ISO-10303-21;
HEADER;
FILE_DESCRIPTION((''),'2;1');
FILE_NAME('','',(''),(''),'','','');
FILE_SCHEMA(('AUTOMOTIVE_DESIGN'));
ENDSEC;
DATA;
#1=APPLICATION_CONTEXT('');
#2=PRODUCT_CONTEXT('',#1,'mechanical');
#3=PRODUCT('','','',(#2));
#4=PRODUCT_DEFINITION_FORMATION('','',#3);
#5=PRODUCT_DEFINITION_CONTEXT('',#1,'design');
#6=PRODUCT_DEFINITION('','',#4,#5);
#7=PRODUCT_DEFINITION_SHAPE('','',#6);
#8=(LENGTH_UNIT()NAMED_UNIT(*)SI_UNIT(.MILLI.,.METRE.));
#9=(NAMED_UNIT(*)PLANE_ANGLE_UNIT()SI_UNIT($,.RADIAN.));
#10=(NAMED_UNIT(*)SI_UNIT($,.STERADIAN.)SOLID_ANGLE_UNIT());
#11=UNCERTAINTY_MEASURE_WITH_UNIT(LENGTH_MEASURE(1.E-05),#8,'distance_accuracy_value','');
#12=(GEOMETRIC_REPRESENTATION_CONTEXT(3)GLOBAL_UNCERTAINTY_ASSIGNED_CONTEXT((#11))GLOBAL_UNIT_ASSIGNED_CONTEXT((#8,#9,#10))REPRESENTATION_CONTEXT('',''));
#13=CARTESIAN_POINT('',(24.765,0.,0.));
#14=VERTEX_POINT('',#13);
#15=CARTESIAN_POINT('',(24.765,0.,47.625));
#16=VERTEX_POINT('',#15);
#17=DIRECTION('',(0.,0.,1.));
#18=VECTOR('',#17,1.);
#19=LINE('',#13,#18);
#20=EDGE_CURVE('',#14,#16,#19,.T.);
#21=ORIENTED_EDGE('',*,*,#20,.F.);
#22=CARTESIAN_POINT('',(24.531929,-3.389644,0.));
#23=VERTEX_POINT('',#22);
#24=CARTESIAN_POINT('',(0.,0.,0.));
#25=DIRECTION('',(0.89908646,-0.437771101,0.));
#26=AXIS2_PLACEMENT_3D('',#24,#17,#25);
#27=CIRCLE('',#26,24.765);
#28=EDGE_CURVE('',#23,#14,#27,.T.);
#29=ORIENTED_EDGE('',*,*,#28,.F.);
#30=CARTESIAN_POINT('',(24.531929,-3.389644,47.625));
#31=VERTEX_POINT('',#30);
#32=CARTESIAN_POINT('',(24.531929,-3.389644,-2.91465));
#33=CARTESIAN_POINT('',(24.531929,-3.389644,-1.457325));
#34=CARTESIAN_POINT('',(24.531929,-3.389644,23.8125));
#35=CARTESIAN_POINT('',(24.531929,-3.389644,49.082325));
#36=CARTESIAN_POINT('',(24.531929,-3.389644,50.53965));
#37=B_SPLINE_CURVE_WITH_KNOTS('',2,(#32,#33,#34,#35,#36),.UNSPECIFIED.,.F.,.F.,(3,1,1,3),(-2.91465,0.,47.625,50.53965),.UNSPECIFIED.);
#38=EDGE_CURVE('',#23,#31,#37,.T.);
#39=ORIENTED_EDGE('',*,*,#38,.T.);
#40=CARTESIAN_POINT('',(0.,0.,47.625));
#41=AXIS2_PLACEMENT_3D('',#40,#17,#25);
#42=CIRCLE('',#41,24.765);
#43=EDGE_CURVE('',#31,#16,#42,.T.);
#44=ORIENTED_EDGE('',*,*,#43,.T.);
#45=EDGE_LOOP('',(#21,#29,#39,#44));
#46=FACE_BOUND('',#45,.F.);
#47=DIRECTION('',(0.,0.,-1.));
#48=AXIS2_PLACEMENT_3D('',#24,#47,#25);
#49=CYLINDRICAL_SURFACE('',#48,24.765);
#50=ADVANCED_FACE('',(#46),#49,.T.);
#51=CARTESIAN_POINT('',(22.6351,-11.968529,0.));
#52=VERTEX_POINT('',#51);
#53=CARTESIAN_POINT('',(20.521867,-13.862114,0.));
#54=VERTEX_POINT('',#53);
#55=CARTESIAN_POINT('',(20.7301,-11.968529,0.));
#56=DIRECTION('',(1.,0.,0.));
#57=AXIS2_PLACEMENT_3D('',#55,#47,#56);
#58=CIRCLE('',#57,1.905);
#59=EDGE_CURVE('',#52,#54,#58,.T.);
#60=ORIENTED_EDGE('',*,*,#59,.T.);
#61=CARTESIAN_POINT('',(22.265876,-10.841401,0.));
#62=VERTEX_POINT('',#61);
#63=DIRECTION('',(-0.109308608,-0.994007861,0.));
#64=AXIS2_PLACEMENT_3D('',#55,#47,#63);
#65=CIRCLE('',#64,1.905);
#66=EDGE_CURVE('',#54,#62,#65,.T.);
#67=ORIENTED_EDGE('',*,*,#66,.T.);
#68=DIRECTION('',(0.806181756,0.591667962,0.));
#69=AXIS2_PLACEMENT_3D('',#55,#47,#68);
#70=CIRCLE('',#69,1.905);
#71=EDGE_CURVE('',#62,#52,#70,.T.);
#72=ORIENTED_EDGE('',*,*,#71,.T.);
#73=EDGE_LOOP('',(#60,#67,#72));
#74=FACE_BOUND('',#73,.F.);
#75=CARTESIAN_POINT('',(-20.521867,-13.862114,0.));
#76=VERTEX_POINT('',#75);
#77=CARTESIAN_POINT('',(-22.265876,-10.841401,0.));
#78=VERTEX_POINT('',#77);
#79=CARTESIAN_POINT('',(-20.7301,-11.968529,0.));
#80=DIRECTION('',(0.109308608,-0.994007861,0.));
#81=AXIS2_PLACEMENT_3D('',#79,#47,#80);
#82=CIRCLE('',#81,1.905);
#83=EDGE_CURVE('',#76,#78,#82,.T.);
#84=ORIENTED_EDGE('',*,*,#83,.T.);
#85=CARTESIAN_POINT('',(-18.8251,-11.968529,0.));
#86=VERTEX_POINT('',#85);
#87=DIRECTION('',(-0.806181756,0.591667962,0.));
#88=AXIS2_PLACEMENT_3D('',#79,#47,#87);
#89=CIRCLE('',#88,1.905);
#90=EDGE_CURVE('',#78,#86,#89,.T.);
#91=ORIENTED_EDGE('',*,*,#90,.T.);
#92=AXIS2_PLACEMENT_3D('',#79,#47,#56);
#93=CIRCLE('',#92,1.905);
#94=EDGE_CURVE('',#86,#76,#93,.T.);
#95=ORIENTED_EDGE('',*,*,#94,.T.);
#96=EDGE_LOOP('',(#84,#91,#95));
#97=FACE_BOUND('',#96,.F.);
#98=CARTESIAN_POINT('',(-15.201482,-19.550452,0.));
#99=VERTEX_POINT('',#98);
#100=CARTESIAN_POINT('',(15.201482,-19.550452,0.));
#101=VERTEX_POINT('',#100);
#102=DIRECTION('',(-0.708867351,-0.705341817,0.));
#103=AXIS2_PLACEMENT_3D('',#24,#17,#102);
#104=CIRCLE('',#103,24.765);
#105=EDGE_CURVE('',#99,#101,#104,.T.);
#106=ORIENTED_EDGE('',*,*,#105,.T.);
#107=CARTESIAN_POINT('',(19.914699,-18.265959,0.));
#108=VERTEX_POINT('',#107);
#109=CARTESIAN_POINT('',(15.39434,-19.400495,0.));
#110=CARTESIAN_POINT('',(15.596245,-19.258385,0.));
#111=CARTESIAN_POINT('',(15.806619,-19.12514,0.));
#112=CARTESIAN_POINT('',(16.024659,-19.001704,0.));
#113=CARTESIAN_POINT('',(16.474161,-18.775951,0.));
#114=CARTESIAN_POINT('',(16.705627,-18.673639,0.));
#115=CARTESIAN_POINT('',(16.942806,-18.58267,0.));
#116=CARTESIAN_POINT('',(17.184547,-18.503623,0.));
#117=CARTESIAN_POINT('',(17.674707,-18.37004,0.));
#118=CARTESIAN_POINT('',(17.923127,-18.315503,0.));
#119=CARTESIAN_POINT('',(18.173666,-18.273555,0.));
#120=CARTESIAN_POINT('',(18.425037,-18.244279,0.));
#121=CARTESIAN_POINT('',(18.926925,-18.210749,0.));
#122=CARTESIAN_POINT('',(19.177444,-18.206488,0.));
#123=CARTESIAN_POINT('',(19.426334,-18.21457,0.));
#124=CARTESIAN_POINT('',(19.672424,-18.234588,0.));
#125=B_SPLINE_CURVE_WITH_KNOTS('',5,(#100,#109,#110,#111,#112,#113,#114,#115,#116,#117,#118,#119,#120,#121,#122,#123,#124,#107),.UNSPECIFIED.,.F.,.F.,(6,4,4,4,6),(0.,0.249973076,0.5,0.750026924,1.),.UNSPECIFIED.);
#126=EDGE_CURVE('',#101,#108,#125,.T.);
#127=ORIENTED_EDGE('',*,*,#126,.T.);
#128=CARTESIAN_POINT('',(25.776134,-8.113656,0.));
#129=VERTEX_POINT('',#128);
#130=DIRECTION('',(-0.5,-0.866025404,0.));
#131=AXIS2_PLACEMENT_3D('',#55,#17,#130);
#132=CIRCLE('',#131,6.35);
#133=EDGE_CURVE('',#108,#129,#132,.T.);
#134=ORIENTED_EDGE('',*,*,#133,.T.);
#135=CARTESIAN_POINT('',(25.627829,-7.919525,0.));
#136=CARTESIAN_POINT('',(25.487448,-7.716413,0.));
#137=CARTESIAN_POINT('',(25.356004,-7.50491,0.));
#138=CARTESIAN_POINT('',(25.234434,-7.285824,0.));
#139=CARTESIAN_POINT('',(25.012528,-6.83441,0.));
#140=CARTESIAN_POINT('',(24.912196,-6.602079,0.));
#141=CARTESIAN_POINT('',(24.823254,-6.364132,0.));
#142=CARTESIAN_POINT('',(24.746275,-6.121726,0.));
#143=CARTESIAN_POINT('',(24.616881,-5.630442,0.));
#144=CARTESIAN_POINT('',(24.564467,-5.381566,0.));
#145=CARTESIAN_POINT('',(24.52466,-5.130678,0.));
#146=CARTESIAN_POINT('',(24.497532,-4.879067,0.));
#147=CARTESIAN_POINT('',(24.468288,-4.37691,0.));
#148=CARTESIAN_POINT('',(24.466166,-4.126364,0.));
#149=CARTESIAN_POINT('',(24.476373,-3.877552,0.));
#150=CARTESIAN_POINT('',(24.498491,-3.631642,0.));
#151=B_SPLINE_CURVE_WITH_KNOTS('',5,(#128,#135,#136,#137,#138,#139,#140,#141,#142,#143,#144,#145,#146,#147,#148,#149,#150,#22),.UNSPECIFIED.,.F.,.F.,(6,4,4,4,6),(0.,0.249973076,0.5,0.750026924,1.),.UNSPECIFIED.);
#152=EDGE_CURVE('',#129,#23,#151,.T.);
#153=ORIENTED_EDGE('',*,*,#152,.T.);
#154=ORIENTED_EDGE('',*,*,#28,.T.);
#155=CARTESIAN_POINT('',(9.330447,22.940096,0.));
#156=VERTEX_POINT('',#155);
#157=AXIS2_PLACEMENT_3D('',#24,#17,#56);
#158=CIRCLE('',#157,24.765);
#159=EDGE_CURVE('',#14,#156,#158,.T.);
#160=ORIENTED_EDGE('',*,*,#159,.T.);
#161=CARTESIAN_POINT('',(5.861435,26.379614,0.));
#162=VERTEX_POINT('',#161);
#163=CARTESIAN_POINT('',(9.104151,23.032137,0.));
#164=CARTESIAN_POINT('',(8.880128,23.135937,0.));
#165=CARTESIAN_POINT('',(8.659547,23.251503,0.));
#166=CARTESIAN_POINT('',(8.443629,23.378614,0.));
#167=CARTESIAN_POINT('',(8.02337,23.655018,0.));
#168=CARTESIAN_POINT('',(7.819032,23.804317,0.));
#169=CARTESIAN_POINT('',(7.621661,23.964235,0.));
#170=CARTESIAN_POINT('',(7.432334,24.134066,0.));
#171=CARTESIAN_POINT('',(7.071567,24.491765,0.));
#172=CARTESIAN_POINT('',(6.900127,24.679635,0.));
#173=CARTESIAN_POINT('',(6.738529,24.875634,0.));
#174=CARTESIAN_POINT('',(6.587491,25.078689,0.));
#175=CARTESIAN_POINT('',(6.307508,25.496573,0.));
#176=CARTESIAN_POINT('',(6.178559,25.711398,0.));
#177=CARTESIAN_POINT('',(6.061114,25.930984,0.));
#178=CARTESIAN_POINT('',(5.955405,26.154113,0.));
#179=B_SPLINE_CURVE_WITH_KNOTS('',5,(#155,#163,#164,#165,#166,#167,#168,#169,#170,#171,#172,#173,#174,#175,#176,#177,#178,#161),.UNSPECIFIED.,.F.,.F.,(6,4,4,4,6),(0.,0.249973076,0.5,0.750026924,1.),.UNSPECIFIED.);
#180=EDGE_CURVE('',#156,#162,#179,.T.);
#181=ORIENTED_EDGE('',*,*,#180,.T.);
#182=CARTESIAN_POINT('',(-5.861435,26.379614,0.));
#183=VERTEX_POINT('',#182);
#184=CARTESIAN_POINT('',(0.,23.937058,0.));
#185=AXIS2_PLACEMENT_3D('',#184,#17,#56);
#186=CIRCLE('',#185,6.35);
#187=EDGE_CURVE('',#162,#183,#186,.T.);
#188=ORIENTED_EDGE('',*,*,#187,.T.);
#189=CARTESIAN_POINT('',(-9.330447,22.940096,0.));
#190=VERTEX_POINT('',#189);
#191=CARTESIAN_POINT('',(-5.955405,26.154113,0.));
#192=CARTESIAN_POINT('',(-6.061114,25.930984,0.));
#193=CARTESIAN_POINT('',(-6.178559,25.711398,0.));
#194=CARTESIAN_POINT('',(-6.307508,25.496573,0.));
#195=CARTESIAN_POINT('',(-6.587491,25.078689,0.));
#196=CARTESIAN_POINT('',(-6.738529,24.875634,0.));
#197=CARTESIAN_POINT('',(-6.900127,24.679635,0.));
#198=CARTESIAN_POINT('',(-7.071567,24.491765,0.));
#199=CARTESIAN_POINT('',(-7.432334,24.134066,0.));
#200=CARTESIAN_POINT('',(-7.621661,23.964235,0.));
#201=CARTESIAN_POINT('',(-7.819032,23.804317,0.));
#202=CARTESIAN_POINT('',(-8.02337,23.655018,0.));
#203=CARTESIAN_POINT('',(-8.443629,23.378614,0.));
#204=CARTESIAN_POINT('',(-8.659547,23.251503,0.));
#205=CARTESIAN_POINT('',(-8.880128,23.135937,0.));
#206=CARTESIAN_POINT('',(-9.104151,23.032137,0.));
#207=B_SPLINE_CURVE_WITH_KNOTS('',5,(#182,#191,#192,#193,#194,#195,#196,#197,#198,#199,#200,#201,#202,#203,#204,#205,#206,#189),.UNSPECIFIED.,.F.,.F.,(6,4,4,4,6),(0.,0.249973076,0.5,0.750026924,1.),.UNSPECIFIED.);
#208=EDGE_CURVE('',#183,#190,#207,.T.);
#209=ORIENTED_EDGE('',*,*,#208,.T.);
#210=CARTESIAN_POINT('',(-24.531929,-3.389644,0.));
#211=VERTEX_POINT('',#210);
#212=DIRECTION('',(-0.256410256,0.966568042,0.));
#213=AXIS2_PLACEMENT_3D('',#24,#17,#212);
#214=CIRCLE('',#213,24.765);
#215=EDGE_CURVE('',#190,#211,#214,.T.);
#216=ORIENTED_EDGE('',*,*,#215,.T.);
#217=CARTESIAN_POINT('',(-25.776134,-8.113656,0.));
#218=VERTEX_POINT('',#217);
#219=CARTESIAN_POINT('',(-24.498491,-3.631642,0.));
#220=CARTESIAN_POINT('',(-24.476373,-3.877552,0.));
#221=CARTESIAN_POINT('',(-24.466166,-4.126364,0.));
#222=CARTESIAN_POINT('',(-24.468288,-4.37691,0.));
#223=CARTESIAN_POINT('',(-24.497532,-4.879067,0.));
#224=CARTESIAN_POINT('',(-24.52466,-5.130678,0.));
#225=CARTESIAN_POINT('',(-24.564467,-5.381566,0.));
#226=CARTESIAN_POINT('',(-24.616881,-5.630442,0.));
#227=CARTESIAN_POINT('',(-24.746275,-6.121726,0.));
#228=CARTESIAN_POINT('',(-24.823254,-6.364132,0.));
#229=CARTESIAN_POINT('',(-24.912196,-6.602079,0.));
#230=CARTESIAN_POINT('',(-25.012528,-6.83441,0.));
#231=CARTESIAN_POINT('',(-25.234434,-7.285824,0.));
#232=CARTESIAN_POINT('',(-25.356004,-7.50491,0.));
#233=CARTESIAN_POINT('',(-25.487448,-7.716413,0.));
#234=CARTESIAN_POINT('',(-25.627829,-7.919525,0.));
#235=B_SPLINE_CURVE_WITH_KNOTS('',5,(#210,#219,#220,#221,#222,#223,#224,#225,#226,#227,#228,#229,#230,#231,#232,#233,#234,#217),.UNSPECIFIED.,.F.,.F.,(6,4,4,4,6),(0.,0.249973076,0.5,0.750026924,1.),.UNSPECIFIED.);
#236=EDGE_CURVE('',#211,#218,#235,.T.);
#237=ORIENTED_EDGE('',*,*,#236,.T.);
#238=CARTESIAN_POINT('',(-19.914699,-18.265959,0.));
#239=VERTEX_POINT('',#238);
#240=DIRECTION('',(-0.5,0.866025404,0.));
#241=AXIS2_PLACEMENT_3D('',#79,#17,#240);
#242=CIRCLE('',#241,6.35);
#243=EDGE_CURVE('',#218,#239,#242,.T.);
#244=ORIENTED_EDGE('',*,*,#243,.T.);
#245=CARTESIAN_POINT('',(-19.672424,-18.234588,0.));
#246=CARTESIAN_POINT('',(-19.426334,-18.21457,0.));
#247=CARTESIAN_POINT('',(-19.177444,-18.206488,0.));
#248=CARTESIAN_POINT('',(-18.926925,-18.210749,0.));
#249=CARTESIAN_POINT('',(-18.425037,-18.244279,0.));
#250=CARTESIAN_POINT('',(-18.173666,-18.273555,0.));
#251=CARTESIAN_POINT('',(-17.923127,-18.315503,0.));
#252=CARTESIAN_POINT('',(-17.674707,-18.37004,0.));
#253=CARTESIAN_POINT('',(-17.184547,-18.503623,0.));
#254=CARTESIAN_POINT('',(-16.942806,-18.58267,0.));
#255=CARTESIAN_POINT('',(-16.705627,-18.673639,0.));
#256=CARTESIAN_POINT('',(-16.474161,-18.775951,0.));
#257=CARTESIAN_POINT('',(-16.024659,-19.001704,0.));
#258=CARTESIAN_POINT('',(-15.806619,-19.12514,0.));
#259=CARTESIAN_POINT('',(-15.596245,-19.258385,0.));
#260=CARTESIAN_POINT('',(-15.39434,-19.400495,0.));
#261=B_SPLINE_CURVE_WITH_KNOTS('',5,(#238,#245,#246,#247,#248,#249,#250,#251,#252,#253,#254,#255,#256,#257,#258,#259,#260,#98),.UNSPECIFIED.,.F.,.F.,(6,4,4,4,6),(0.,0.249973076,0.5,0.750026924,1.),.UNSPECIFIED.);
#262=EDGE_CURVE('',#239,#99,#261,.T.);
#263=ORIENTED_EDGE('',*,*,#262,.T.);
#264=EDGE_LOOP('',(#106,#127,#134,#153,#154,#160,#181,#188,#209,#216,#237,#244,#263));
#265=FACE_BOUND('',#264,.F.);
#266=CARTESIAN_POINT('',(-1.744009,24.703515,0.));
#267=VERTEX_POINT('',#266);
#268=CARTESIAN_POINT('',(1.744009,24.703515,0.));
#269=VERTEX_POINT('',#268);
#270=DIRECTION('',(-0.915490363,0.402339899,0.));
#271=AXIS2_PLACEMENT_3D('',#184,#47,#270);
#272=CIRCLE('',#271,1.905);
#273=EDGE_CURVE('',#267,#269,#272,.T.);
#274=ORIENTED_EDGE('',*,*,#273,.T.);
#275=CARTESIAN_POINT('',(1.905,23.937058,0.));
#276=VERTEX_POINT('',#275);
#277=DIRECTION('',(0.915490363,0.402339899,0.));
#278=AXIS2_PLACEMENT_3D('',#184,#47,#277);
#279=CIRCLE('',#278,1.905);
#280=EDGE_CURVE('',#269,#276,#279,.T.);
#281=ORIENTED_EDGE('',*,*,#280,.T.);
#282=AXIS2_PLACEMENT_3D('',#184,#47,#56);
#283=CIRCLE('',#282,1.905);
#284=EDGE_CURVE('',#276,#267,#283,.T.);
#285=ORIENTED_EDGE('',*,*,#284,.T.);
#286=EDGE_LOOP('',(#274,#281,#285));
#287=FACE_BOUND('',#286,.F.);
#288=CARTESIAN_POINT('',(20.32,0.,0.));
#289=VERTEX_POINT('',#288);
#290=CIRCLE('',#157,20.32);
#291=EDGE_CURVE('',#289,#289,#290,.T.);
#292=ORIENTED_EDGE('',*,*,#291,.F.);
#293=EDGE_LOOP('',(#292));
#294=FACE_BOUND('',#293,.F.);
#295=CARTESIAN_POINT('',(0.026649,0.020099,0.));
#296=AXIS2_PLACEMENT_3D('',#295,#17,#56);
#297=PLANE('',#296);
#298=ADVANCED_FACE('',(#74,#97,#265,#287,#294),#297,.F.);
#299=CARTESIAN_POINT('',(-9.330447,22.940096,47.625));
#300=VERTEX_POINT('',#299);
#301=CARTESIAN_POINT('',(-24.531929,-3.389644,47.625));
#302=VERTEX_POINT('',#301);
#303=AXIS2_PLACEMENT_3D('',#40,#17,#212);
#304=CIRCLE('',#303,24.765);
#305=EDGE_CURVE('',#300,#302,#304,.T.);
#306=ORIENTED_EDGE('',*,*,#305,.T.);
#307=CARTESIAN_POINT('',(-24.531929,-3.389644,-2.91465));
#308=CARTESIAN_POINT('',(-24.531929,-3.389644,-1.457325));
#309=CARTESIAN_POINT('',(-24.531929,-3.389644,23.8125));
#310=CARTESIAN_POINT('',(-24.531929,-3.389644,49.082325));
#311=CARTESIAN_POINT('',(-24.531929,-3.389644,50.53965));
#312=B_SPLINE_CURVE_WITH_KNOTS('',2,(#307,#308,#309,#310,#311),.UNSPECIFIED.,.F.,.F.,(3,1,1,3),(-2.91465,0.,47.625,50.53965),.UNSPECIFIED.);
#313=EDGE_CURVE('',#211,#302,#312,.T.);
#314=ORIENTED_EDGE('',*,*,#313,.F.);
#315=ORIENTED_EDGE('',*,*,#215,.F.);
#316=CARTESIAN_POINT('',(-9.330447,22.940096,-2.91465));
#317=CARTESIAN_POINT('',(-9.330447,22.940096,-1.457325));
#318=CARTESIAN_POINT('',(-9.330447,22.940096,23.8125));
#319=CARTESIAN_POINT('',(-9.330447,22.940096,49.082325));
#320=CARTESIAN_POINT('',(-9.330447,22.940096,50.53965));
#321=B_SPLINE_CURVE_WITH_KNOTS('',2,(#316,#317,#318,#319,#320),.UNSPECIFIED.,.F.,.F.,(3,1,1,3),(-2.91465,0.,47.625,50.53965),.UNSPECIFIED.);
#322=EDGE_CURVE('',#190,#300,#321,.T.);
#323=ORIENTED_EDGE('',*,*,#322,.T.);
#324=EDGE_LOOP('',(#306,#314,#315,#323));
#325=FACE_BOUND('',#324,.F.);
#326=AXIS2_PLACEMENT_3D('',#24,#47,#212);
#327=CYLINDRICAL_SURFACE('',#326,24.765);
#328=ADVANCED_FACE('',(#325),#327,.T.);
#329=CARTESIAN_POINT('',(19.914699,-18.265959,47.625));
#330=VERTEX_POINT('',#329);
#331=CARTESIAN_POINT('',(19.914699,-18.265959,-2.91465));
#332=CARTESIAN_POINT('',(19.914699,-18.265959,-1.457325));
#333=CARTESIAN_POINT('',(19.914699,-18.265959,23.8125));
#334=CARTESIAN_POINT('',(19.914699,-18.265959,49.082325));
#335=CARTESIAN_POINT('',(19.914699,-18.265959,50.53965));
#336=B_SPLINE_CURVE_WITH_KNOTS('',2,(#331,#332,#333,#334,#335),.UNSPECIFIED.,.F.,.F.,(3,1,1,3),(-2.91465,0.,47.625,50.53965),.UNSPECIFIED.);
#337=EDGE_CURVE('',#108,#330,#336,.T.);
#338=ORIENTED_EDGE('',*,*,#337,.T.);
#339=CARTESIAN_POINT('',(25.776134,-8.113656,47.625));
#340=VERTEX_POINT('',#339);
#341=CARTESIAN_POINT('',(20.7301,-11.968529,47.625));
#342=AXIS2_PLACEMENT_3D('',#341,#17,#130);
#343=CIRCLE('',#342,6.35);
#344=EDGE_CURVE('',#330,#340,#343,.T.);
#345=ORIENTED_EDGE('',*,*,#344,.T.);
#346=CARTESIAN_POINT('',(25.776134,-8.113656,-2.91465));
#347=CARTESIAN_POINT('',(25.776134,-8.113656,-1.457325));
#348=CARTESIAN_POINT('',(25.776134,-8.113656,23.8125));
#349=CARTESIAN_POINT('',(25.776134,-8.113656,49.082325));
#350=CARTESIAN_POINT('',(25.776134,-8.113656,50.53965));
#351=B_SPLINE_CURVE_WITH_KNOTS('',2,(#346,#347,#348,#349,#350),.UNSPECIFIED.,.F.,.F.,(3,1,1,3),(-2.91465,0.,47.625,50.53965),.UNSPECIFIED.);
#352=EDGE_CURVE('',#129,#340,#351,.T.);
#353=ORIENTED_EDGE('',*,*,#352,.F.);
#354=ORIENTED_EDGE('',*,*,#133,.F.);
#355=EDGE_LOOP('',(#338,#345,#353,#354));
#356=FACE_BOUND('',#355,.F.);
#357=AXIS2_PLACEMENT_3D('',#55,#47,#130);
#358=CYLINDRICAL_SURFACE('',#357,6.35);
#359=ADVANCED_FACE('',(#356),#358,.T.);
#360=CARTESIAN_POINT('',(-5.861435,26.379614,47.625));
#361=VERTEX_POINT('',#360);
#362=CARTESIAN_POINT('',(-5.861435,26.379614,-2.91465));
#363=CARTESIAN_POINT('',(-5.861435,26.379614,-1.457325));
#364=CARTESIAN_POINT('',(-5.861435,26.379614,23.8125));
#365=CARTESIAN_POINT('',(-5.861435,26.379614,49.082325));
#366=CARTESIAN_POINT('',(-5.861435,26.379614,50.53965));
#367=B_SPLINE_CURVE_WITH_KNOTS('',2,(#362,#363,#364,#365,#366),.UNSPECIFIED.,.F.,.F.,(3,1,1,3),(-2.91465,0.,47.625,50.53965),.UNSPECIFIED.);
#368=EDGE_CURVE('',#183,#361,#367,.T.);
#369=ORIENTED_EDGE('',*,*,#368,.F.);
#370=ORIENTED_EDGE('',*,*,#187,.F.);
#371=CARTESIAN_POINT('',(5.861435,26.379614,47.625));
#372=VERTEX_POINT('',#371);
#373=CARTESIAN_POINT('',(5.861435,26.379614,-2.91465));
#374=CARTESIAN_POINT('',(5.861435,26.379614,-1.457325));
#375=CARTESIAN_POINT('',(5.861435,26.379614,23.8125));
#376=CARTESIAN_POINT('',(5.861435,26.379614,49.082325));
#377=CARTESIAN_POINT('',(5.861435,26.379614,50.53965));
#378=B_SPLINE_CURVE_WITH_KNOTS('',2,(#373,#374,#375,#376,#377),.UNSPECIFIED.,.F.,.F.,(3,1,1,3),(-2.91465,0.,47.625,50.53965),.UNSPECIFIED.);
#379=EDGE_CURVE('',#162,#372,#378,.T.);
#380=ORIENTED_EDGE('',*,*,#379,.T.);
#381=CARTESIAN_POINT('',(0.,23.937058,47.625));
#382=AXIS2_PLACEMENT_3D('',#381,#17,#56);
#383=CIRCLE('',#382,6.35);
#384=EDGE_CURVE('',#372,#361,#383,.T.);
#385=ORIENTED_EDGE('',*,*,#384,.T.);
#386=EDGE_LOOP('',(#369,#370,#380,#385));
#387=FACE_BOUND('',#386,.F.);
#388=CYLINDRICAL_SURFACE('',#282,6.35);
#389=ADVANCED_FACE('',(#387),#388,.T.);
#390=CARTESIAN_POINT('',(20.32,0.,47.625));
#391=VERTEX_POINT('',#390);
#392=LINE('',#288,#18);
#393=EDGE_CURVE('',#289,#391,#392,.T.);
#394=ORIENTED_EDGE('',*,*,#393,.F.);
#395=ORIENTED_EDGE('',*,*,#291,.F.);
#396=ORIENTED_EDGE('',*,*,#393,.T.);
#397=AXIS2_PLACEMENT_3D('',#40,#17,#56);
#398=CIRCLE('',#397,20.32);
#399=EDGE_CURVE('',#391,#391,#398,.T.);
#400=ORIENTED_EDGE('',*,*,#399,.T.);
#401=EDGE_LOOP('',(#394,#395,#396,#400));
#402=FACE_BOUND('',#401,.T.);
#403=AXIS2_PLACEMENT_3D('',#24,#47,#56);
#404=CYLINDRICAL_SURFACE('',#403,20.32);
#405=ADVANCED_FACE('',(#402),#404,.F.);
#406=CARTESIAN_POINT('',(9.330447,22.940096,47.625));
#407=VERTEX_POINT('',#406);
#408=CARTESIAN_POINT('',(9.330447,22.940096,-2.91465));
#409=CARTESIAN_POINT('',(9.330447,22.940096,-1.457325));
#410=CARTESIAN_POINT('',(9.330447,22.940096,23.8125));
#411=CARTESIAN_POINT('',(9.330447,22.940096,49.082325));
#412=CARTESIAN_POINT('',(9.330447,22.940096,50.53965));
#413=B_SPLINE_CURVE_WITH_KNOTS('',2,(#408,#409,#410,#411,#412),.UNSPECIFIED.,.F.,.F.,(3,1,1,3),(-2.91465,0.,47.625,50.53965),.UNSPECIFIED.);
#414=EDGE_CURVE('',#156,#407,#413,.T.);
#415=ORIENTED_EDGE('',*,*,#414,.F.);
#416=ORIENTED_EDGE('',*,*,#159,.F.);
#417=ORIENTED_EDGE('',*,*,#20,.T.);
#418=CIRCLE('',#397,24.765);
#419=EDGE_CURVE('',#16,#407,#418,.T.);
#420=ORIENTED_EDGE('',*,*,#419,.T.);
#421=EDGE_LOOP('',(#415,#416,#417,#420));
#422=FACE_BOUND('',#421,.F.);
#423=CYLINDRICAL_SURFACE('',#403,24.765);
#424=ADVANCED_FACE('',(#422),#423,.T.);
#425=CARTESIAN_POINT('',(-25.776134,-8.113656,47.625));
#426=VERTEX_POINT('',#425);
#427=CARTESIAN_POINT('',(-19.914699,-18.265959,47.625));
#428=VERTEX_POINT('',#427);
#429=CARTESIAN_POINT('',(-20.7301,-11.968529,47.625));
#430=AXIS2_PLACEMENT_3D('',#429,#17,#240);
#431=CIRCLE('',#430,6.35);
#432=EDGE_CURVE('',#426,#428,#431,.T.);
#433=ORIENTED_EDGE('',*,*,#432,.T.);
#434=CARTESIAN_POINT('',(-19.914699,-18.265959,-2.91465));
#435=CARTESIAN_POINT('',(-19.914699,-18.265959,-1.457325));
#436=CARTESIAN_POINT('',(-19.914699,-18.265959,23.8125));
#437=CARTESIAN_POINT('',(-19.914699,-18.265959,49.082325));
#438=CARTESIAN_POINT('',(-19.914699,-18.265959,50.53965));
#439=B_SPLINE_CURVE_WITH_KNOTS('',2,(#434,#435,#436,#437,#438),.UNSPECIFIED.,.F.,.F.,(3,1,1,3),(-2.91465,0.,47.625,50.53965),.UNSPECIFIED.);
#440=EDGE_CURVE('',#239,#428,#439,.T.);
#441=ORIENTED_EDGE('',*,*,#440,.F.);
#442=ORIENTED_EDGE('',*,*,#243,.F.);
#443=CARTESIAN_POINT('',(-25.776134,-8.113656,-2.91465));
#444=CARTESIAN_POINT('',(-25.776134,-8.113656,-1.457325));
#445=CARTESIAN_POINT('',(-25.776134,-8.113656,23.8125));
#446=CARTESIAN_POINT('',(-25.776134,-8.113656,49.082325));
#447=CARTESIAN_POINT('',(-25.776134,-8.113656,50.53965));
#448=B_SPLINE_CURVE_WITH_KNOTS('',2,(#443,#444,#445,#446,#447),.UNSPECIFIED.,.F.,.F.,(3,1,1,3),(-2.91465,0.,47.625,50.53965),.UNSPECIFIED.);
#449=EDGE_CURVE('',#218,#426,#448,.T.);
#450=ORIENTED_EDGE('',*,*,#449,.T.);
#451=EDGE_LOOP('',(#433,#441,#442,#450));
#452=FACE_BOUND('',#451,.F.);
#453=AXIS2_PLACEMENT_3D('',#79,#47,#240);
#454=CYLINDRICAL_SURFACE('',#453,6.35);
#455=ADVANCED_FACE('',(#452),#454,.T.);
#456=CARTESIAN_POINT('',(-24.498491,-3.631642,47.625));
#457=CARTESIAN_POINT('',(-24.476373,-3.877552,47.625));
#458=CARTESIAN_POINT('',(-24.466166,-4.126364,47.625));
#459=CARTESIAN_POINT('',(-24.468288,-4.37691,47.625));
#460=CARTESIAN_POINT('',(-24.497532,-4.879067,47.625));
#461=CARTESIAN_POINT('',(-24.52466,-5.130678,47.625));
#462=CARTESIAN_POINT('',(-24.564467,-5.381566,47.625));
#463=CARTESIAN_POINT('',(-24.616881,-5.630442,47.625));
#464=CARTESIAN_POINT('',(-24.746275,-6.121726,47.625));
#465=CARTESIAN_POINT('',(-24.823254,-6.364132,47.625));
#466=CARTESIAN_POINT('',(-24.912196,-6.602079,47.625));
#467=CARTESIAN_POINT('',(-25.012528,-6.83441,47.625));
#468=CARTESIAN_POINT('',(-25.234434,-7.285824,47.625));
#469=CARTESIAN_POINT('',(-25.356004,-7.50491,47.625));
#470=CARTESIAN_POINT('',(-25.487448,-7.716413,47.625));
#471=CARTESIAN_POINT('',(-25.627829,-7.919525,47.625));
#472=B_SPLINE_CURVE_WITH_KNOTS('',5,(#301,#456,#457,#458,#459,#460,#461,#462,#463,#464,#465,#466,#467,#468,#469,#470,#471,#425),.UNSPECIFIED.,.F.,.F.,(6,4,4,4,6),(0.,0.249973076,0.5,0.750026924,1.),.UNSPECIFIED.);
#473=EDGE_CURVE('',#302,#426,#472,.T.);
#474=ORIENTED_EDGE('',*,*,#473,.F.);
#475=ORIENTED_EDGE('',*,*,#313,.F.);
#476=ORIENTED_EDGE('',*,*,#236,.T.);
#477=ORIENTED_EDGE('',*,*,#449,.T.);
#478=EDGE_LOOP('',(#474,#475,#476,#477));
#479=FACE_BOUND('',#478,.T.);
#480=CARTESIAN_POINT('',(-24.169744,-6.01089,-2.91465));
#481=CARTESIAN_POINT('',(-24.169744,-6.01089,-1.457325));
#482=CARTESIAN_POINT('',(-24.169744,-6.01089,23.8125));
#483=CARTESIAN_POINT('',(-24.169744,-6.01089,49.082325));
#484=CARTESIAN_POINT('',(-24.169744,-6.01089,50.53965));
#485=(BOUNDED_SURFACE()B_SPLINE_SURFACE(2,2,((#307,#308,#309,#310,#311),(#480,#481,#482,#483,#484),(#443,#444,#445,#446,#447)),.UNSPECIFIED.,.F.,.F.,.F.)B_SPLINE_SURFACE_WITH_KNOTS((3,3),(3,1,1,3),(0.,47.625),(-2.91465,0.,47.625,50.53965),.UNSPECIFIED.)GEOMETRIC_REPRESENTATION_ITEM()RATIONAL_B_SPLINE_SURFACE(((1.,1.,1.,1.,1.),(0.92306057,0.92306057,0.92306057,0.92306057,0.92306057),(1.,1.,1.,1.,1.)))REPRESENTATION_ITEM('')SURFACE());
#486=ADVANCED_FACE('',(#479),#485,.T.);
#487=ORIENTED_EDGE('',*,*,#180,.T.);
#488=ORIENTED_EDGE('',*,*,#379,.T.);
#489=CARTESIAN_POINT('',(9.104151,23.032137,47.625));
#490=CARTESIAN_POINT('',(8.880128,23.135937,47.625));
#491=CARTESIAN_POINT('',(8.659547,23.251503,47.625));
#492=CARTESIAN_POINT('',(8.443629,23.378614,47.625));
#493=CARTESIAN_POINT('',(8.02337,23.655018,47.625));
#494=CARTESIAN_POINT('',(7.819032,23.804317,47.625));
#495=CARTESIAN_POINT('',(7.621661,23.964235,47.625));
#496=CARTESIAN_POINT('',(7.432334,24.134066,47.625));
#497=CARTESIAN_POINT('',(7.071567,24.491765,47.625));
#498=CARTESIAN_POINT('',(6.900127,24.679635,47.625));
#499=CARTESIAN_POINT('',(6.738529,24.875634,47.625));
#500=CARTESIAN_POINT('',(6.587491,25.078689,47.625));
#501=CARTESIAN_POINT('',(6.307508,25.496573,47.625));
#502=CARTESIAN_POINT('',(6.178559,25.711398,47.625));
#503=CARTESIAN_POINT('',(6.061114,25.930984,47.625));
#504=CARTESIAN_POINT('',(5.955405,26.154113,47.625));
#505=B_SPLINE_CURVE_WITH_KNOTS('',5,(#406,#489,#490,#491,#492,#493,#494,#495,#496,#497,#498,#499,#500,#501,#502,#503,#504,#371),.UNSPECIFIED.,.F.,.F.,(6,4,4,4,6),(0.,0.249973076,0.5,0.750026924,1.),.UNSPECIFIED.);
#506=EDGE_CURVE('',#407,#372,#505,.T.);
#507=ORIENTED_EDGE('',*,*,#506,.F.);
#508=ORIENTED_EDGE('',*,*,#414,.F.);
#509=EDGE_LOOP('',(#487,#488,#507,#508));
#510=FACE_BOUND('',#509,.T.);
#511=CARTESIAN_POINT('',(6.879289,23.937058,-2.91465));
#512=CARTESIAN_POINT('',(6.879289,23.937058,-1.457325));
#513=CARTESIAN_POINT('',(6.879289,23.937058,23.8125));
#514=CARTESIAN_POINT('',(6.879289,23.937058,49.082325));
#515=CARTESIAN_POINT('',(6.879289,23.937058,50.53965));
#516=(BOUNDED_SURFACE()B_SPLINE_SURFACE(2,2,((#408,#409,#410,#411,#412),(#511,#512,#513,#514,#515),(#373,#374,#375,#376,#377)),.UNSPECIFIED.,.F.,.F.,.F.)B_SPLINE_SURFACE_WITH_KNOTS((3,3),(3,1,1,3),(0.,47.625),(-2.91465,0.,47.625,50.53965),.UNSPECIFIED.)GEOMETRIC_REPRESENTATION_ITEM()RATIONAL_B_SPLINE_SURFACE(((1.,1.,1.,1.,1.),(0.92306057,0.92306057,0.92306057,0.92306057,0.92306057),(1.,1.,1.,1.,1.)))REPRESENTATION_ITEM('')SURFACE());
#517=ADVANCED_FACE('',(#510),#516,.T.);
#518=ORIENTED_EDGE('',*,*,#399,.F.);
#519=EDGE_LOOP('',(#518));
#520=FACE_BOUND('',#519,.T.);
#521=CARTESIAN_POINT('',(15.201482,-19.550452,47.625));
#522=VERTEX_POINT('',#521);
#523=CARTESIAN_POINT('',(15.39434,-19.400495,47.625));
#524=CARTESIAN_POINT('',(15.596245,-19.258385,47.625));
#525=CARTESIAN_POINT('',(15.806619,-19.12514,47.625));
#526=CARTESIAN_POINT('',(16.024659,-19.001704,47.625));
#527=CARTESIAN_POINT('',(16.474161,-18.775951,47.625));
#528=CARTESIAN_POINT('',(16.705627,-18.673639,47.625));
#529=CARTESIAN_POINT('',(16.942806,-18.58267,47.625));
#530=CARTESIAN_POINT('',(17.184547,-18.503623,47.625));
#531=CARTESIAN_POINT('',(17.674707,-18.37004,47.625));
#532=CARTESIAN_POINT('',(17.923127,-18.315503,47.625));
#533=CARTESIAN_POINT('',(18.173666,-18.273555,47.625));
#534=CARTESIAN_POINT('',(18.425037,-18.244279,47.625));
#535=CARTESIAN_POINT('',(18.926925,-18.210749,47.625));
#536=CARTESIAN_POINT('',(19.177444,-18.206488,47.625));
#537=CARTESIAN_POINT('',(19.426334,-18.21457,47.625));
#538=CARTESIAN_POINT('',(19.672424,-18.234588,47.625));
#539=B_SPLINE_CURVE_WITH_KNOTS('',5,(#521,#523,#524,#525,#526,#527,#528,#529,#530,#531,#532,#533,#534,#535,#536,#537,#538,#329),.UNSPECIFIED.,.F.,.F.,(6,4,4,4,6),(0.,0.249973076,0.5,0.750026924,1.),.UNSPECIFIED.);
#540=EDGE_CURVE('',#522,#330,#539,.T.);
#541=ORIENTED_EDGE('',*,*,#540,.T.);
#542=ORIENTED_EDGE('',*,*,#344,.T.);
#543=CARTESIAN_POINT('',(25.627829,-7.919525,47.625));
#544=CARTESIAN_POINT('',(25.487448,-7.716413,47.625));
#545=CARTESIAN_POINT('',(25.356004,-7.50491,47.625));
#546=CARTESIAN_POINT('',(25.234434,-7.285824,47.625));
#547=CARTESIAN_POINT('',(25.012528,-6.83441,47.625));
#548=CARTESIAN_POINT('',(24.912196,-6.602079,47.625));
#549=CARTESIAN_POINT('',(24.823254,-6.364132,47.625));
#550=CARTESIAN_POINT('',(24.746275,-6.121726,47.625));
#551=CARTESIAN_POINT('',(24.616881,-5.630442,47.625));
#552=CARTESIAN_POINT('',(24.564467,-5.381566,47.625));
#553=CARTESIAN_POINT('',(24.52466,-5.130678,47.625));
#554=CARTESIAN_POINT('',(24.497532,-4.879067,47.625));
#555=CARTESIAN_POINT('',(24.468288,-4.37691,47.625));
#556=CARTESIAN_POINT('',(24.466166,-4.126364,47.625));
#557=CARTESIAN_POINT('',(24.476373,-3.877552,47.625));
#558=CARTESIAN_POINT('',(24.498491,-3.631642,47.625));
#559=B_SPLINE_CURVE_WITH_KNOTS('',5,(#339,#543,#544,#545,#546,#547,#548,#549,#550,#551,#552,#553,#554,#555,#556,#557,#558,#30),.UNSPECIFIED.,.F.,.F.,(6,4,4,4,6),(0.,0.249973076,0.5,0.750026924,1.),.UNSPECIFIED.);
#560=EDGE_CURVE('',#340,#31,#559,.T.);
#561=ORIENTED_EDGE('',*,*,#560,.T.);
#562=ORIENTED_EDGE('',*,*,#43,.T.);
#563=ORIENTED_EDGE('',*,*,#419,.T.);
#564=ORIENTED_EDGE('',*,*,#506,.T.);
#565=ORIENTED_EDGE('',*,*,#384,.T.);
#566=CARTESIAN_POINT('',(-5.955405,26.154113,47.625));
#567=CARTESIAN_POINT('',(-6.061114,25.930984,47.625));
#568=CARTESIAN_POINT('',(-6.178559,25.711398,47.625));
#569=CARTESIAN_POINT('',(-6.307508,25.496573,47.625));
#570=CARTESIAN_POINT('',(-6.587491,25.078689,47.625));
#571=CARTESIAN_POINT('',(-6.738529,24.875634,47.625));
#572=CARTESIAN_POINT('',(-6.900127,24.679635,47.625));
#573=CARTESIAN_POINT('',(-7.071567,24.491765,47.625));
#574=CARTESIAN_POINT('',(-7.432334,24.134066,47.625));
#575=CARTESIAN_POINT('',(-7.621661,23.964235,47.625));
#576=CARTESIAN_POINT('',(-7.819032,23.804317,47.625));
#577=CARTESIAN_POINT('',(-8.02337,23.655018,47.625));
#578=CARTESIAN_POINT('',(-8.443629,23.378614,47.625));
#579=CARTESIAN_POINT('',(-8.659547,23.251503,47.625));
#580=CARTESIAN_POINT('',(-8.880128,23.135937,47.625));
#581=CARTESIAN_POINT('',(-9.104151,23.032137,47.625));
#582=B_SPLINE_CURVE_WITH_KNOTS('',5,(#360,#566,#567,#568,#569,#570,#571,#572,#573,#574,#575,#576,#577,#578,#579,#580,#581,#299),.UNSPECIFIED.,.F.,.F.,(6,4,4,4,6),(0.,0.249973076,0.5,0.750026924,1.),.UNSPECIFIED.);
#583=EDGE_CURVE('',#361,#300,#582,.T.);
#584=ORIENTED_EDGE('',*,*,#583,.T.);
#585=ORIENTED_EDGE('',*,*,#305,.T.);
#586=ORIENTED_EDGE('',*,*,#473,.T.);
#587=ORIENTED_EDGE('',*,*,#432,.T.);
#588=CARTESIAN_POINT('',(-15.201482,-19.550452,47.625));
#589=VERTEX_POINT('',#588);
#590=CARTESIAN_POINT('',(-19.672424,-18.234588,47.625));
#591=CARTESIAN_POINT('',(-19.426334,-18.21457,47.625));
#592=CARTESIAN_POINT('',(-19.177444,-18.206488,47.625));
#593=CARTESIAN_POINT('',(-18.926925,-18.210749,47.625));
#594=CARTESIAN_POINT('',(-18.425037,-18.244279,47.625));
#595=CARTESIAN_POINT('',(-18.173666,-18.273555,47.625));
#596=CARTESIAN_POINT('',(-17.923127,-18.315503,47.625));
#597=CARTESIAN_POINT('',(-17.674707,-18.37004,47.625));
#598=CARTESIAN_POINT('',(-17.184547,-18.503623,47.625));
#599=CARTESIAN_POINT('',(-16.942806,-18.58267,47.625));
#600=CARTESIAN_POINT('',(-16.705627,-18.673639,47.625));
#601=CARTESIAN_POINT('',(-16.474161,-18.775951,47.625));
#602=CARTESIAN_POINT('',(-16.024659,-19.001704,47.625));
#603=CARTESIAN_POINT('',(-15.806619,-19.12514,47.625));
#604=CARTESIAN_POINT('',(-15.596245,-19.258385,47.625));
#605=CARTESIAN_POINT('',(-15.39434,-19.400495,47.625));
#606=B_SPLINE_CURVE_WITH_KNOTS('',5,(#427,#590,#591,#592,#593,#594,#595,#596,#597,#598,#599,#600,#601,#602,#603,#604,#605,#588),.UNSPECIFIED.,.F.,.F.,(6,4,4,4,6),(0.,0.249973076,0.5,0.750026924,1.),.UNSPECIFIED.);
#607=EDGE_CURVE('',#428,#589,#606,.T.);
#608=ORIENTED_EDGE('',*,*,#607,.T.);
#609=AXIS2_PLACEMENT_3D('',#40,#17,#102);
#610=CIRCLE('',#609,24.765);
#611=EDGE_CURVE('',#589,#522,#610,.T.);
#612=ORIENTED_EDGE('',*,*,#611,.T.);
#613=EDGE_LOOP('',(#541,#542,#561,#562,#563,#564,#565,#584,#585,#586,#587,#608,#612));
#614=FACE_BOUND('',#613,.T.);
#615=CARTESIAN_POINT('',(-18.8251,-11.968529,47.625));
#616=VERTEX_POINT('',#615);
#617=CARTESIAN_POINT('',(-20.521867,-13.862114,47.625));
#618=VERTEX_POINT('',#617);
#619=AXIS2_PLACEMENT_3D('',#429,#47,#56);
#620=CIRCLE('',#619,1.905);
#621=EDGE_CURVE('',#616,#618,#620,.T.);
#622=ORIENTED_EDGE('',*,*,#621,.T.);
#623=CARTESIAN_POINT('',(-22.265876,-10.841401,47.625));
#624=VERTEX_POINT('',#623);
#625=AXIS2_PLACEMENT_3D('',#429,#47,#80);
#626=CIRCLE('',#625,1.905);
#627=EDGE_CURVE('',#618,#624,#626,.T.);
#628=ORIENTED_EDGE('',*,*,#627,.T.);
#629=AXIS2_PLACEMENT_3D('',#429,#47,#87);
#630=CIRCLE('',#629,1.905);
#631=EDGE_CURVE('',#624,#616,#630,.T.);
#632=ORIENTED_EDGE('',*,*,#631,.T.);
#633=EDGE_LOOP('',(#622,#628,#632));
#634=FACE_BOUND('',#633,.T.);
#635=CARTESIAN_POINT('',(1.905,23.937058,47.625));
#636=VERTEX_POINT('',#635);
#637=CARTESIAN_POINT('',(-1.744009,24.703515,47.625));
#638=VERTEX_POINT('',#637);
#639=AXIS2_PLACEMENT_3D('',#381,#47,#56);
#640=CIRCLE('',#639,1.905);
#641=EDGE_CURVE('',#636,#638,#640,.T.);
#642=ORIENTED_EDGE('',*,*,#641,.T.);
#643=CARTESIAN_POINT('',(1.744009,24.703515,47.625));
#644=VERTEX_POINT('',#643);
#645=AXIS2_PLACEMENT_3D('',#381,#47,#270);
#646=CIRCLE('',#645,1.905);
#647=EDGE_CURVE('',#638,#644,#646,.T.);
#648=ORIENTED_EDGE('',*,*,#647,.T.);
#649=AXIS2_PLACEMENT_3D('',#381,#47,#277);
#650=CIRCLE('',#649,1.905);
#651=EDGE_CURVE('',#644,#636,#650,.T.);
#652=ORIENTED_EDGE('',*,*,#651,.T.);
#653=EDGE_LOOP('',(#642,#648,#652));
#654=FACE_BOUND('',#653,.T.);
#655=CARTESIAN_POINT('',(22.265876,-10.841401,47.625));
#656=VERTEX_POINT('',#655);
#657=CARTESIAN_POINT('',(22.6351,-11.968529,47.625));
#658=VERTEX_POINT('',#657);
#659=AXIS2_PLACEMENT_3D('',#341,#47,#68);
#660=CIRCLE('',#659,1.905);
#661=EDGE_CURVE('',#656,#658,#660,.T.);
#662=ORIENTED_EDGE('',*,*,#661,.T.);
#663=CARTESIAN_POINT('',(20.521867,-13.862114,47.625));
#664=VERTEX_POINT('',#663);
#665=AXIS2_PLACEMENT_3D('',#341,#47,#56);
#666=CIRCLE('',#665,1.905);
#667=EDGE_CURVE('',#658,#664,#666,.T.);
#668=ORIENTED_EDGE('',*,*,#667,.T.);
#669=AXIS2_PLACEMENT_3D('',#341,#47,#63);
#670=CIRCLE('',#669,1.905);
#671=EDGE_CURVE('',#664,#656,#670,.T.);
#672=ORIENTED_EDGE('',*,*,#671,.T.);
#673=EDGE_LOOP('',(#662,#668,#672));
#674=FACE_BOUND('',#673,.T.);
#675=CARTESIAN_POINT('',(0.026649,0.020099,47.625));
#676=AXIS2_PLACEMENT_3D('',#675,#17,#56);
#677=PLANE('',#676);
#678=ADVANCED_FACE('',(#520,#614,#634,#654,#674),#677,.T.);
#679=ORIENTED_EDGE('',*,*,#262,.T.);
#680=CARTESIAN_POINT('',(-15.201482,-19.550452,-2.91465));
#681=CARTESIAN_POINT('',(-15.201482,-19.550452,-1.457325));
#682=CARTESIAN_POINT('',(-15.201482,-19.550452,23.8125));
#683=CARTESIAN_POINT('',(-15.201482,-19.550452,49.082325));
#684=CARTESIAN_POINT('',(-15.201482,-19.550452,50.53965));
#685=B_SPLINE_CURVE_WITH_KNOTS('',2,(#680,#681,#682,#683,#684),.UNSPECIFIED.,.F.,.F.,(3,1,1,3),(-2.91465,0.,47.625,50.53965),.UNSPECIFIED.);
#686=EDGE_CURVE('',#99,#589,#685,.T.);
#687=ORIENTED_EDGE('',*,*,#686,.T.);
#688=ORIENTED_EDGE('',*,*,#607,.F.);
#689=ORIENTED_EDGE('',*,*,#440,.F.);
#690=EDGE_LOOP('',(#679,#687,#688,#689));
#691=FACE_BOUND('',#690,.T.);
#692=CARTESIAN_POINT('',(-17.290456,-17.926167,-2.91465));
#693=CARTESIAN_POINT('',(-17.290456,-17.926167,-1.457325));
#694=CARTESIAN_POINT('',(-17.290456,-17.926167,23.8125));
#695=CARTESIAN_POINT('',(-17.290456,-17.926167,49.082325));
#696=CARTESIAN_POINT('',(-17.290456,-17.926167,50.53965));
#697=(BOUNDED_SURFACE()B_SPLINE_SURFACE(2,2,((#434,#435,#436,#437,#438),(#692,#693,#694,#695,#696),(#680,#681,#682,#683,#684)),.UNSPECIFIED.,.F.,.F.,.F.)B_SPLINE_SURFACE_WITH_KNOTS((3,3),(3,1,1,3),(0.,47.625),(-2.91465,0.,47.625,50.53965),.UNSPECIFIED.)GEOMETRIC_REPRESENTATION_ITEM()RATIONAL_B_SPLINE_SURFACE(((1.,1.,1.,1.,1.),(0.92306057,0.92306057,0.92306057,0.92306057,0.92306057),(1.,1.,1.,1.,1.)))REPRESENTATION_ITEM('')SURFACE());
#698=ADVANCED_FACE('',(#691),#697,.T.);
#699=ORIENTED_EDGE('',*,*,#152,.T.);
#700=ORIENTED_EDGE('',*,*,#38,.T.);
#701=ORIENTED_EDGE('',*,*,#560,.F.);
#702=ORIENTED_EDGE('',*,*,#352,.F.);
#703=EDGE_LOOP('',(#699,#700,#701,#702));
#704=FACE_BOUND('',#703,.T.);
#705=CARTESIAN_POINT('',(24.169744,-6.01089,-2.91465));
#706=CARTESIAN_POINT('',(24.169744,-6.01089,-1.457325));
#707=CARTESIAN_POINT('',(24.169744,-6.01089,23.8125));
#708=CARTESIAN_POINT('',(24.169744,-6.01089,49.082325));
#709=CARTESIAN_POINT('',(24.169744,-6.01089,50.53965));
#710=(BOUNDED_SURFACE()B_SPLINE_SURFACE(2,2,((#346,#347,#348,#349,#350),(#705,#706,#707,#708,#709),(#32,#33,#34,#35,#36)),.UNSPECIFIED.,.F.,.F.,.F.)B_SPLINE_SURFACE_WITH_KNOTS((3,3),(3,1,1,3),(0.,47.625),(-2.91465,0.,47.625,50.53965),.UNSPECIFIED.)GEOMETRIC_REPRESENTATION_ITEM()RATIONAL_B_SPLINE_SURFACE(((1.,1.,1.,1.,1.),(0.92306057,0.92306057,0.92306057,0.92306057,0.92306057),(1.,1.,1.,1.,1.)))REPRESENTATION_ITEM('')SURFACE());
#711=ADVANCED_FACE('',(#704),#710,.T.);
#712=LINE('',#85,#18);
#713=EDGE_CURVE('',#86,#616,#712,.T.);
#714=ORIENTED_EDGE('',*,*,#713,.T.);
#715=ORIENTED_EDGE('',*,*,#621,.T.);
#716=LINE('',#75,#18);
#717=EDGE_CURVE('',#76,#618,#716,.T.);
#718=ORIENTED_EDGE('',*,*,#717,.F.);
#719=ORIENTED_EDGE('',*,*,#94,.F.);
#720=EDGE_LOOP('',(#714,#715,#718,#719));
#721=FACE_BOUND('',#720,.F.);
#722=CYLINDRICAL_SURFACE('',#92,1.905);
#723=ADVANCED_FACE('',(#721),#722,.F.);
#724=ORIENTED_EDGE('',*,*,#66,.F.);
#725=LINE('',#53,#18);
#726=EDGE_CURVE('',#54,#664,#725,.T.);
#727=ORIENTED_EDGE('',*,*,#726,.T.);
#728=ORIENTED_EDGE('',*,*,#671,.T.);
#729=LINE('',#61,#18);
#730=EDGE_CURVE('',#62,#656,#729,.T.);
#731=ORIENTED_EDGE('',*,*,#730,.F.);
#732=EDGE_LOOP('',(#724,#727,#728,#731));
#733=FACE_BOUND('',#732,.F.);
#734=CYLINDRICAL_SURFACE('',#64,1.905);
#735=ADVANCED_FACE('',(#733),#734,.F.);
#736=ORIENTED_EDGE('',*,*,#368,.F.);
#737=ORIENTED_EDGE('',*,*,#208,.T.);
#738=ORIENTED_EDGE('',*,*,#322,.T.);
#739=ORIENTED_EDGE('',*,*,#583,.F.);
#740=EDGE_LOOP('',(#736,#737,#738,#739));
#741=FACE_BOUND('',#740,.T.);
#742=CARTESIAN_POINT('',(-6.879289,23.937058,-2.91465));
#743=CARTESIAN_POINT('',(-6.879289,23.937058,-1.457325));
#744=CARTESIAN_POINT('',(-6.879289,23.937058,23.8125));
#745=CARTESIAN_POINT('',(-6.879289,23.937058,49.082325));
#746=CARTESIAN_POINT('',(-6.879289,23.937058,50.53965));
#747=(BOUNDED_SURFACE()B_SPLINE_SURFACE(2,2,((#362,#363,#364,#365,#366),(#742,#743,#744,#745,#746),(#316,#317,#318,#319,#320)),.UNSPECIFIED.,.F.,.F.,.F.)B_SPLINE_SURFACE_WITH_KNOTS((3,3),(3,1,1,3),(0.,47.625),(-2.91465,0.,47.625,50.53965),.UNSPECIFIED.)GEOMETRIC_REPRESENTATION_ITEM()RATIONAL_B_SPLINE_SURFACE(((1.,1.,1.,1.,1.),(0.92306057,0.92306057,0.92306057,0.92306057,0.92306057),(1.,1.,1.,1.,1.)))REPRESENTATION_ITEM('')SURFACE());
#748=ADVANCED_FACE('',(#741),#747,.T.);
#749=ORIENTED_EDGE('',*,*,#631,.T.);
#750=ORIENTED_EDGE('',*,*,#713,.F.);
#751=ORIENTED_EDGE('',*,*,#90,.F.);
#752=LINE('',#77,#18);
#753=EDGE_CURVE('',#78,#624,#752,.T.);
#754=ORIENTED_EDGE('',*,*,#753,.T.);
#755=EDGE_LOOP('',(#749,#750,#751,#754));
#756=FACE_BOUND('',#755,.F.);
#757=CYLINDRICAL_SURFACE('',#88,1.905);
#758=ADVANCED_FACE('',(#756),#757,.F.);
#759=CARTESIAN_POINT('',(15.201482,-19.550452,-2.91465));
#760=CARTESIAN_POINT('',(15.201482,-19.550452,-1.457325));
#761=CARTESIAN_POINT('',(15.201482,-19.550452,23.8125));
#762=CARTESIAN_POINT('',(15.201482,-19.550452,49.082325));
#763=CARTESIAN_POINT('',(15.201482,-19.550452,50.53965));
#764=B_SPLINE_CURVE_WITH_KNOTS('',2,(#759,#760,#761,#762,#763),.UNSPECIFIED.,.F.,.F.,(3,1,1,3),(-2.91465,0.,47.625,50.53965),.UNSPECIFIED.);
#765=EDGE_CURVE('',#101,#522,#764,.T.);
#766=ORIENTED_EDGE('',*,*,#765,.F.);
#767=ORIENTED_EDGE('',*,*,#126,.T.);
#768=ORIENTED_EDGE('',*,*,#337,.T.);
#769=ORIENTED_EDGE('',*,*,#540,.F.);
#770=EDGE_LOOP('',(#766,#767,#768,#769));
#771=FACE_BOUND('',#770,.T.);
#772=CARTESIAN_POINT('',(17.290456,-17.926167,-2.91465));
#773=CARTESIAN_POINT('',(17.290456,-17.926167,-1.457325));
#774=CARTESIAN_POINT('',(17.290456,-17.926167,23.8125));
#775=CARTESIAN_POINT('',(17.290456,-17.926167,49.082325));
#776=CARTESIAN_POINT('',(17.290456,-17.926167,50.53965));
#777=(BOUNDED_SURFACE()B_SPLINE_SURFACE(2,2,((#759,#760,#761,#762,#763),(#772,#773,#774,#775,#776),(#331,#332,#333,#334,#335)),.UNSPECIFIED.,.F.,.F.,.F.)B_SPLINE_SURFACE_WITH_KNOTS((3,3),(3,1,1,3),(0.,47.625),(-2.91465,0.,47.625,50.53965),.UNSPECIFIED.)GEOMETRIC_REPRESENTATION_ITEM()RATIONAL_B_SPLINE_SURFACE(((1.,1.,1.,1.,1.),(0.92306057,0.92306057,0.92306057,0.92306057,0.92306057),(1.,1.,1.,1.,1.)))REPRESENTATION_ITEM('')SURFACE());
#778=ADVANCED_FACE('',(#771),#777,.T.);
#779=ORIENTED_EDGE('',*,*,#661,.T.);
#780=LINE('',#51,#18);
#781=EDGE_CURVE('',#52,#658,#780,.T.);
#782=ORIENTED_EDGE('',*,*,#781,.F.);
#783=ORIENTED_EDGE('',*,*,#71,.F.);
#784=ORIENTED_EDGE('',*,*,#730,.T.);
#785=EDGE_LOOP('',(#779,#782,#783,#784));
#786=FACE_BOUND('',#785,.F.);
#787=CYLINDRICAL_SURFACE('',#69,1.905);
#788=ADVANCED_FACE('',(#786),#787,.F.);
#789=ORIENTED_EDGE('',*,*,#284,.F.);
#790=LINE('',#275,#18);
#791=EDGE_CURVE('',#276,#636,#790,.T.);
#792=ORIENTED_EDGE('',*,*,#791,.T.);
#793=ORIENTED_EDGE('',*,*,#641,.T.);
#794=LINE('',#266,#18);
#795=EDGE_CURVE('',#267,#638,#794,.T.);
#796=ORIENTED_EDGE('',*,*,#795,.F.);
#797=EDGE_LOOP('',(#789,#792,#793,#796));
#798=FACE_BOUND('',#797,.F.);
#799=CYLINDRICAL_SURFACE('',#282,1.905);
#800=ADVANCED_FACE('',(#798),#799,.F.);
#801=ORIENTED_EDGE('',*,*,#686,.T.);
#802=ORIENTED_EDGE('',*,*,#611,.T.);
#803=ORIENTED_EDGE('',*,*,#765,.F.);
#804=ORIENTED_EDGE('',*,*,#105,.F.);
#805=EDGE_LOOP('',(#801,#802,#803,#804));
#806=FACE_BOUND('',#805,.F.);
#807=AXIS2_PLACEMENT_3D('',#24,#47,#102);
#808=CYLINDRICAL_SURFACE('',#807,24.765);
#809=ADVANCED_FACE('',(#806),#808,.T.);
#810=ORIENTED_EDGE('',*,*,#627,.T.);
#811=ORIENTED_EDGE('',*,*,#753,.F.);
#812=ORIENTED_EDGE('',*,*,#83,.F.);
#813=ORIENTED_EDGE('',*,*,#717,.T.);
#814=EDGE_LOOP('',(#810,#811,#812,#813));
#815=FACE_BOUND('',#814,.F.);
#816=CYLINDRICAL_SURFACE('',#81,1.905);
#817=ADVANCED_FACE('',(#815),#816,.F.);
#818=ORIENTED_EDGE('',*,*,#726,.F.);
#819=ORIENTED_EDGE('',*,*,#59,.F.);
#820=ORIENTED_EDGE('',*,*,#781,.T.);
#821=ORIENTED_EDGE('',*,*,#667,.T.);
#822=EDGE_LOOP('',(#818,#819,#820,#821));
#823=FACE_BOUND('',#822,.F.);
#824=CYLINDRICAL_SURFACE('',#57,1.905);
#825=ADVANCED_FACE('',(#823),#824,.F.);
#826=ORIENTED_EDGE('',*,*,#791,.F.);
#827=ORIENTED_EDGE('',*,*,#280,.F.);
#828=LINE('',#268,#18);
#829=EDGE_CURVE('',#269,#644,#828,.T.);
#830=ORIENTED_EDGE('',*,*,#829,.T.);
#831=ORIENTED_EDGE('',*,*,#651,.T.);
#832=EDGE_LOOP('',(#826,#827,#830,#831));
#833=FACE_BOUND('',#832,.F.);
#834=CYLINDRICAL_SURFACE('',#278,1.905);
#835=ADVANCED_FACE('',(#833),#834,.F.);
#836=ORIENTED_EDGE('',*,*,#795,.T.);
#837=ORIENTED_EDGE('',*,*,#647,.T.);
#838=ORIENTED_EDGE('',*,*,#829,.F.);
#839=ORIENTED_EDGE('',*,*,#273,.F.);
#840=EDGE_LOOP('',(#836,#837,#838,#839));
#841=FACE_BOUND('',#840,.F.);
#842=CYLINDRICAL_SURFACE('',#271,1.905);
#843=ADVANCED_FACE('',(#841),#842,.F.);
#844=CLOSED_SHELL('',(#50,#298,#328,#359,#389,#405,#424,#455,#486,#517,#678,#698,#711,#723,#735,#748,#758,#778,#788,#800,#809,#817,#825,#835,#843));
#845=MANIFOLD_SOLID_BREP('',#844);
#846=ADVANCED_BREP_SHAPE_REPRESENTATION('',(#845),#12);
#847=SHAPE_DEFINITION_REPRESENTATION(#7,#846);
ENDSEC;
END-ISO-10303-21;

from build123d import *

# Parameters (mm, degrees)
F0_R     = 20.32
F1_DEPTH = 47.625
F2_R     = 6.35


with BuildPart() as f1:
    # F0 (on Top) → F1 (new body)
    with BuildSketch(Plane.XY):
        with BuildLine():
            ThreePointArc((23.9050999455, -6.4692674698), (24.5490837421, -3.2630832697), (24.765, 0))
            ThreePointArc((24.765, 0), (19.6285885254, 15.1004548773), (6.35, 23.9370575677))
            ThreePointArc((6.35, 23.9370575677), (4.0651088886, 24.4290833787), (1.7440091422, 24.703515076))
            ThreePointArc((1.7440091422, 24.703515076), (1.8643178935, 24.3286489263), (1.905, 23.9370575677))
            ThreePointArc((1.905, 23.9370575677), (-0.3915913586, 22.0727396742), (-1.7440091422, 24.703515076))
            ThreePointArc((-1.7440091422, 24.703515076), (-4.0651088886, 24.4290833787), (-6.35, 23.9370575677))
            ThreePointArc((-6.35, 23.9370575677), (-21.4471191247, 12.3825), (-23.9050999455, -6.4692674698))
            ThreePointArc((-23.9050999455, -6.4692674698), (-23.1887612414, -8.6940541227), (-22.2658761897, -10.8414013165))
            ThreePointArc((-22.2658761897, -10.8414013165), (-20.1370690632, -10.1581864481), (-18.8250999455, -11.9685287839))
            ThreePointArc((-18.8250999455, -11.9685287839), (-19.3113489683, -13.239815795), (-20.5218670475, -13.8621137596))
            ThreePointArc((-20.5218670475, -13.8621137596), (-19.1236523528, -15.735029256), (-17.5550999455, -17.4677900979))
            ThreePointArc((-17.5550999455, -17.4677900979), (0, -24.765), (17.5550999455, -17.4677900979))
            ThreePointArc((17.5550999455, -17.4677900979), (19.1236523528, -15.735029256), (20.5218670475, -13.8621137596))
            ThreePointArc((20.5218670475, -13.8621137596), (19.0803215513, -11.0160287839), (22.2658761897, -10.8414013165))
            ThreePointArc((22.2658761897, -10.8414013165), (23.1887612414, -8.6940541227), (23.9050999455, -6.4692674698))
        make_face()
        Circle(F0_R, mode=Mode.SUBTRACT)
        with BuildLine():
            ThreePointArc((-22.2658761897, -10.8414013165), (-23.1887612414, -8.6940541227), (-23.9050999455, -6.4692674698))
            ThreePointArc((-23.9050999455, -6.4692674698), (-26.2293612595, -15.1435287839), (-17.5550999455, -17.4677900979))
            ThreePointArc((-17.5550999455, -17.4677900979), (-19.1236523528, -15.735029256), (-20.5218670475, -13.8621137596))
            ThreePointArc((-20.5218670475, -13.8621137596), (-22.3798783397, -12.9210287839), (-22.2658761897, -10.8414013165))
        make_face()
        with BuildLine():
            ThreePointArc((1.7440091422, 24.703515076), (4.0651088886, 24.4290833787), (6.35, 23.9370575677))
            ThreePointArc((6.35, 23.9370575677), (0, 30.2870575677), (-6.35, 23.9370575677))
            ThreePointArc((-6.35, 23.9370575677), (-4.0651088886, 24.4290833787), (-1.7440091422, 24.703515076))
            ThreePointArc((-1.7440091422, 24.703515076), (0, 25.8420575677), (1.7440091422, 24.703515076))
        make_face()
        with BuildLine():
            ThreePointArc((17.5550999455, -17.4677900979), (26.2293612595, -15.1435287839), (23.9050999455, -6.4692674698))
            ThreePointArc((23.9050999455, -6.4692674698), (23.1887612414, -8.6940541227), (22.2658761897, -10.8414013165))
            ThreePointArc((22.2658761897, -10.8414013165), (22.5404422812, -11.3754979015), (22.6350999455, -11.9685287839))
            ThreePointArc((22.6350999455, -11.9685287839), (22.0013869566, -13.3872797611), (20.5218670475, -13.8621137596))
            ThreePointArc((20.5218670475, -13.8621137596), (19.1236523528, -15.735029256), (17.5550999455, -17.4677900979))
        make_face()
    extrude(amount=F1_DEPTH)

    # F2
    f2_edges = [f1.edges().sort_by_distance(p)[0] for p in [
        (6.35, 23.937058, 23.8125),
        (-23.9051, -6.469267, 23.8125),
        (17.5551, -17.46779, 23.8125),
        (23.9051, -6.469267, 23.8125),
        (-6.35, 23.937058, 23.8125),
        (-17.5551, -17.46779, 23.8125),
    ]]
    fillet(f2_edges, radius=F2_R)


solid = f1.part
